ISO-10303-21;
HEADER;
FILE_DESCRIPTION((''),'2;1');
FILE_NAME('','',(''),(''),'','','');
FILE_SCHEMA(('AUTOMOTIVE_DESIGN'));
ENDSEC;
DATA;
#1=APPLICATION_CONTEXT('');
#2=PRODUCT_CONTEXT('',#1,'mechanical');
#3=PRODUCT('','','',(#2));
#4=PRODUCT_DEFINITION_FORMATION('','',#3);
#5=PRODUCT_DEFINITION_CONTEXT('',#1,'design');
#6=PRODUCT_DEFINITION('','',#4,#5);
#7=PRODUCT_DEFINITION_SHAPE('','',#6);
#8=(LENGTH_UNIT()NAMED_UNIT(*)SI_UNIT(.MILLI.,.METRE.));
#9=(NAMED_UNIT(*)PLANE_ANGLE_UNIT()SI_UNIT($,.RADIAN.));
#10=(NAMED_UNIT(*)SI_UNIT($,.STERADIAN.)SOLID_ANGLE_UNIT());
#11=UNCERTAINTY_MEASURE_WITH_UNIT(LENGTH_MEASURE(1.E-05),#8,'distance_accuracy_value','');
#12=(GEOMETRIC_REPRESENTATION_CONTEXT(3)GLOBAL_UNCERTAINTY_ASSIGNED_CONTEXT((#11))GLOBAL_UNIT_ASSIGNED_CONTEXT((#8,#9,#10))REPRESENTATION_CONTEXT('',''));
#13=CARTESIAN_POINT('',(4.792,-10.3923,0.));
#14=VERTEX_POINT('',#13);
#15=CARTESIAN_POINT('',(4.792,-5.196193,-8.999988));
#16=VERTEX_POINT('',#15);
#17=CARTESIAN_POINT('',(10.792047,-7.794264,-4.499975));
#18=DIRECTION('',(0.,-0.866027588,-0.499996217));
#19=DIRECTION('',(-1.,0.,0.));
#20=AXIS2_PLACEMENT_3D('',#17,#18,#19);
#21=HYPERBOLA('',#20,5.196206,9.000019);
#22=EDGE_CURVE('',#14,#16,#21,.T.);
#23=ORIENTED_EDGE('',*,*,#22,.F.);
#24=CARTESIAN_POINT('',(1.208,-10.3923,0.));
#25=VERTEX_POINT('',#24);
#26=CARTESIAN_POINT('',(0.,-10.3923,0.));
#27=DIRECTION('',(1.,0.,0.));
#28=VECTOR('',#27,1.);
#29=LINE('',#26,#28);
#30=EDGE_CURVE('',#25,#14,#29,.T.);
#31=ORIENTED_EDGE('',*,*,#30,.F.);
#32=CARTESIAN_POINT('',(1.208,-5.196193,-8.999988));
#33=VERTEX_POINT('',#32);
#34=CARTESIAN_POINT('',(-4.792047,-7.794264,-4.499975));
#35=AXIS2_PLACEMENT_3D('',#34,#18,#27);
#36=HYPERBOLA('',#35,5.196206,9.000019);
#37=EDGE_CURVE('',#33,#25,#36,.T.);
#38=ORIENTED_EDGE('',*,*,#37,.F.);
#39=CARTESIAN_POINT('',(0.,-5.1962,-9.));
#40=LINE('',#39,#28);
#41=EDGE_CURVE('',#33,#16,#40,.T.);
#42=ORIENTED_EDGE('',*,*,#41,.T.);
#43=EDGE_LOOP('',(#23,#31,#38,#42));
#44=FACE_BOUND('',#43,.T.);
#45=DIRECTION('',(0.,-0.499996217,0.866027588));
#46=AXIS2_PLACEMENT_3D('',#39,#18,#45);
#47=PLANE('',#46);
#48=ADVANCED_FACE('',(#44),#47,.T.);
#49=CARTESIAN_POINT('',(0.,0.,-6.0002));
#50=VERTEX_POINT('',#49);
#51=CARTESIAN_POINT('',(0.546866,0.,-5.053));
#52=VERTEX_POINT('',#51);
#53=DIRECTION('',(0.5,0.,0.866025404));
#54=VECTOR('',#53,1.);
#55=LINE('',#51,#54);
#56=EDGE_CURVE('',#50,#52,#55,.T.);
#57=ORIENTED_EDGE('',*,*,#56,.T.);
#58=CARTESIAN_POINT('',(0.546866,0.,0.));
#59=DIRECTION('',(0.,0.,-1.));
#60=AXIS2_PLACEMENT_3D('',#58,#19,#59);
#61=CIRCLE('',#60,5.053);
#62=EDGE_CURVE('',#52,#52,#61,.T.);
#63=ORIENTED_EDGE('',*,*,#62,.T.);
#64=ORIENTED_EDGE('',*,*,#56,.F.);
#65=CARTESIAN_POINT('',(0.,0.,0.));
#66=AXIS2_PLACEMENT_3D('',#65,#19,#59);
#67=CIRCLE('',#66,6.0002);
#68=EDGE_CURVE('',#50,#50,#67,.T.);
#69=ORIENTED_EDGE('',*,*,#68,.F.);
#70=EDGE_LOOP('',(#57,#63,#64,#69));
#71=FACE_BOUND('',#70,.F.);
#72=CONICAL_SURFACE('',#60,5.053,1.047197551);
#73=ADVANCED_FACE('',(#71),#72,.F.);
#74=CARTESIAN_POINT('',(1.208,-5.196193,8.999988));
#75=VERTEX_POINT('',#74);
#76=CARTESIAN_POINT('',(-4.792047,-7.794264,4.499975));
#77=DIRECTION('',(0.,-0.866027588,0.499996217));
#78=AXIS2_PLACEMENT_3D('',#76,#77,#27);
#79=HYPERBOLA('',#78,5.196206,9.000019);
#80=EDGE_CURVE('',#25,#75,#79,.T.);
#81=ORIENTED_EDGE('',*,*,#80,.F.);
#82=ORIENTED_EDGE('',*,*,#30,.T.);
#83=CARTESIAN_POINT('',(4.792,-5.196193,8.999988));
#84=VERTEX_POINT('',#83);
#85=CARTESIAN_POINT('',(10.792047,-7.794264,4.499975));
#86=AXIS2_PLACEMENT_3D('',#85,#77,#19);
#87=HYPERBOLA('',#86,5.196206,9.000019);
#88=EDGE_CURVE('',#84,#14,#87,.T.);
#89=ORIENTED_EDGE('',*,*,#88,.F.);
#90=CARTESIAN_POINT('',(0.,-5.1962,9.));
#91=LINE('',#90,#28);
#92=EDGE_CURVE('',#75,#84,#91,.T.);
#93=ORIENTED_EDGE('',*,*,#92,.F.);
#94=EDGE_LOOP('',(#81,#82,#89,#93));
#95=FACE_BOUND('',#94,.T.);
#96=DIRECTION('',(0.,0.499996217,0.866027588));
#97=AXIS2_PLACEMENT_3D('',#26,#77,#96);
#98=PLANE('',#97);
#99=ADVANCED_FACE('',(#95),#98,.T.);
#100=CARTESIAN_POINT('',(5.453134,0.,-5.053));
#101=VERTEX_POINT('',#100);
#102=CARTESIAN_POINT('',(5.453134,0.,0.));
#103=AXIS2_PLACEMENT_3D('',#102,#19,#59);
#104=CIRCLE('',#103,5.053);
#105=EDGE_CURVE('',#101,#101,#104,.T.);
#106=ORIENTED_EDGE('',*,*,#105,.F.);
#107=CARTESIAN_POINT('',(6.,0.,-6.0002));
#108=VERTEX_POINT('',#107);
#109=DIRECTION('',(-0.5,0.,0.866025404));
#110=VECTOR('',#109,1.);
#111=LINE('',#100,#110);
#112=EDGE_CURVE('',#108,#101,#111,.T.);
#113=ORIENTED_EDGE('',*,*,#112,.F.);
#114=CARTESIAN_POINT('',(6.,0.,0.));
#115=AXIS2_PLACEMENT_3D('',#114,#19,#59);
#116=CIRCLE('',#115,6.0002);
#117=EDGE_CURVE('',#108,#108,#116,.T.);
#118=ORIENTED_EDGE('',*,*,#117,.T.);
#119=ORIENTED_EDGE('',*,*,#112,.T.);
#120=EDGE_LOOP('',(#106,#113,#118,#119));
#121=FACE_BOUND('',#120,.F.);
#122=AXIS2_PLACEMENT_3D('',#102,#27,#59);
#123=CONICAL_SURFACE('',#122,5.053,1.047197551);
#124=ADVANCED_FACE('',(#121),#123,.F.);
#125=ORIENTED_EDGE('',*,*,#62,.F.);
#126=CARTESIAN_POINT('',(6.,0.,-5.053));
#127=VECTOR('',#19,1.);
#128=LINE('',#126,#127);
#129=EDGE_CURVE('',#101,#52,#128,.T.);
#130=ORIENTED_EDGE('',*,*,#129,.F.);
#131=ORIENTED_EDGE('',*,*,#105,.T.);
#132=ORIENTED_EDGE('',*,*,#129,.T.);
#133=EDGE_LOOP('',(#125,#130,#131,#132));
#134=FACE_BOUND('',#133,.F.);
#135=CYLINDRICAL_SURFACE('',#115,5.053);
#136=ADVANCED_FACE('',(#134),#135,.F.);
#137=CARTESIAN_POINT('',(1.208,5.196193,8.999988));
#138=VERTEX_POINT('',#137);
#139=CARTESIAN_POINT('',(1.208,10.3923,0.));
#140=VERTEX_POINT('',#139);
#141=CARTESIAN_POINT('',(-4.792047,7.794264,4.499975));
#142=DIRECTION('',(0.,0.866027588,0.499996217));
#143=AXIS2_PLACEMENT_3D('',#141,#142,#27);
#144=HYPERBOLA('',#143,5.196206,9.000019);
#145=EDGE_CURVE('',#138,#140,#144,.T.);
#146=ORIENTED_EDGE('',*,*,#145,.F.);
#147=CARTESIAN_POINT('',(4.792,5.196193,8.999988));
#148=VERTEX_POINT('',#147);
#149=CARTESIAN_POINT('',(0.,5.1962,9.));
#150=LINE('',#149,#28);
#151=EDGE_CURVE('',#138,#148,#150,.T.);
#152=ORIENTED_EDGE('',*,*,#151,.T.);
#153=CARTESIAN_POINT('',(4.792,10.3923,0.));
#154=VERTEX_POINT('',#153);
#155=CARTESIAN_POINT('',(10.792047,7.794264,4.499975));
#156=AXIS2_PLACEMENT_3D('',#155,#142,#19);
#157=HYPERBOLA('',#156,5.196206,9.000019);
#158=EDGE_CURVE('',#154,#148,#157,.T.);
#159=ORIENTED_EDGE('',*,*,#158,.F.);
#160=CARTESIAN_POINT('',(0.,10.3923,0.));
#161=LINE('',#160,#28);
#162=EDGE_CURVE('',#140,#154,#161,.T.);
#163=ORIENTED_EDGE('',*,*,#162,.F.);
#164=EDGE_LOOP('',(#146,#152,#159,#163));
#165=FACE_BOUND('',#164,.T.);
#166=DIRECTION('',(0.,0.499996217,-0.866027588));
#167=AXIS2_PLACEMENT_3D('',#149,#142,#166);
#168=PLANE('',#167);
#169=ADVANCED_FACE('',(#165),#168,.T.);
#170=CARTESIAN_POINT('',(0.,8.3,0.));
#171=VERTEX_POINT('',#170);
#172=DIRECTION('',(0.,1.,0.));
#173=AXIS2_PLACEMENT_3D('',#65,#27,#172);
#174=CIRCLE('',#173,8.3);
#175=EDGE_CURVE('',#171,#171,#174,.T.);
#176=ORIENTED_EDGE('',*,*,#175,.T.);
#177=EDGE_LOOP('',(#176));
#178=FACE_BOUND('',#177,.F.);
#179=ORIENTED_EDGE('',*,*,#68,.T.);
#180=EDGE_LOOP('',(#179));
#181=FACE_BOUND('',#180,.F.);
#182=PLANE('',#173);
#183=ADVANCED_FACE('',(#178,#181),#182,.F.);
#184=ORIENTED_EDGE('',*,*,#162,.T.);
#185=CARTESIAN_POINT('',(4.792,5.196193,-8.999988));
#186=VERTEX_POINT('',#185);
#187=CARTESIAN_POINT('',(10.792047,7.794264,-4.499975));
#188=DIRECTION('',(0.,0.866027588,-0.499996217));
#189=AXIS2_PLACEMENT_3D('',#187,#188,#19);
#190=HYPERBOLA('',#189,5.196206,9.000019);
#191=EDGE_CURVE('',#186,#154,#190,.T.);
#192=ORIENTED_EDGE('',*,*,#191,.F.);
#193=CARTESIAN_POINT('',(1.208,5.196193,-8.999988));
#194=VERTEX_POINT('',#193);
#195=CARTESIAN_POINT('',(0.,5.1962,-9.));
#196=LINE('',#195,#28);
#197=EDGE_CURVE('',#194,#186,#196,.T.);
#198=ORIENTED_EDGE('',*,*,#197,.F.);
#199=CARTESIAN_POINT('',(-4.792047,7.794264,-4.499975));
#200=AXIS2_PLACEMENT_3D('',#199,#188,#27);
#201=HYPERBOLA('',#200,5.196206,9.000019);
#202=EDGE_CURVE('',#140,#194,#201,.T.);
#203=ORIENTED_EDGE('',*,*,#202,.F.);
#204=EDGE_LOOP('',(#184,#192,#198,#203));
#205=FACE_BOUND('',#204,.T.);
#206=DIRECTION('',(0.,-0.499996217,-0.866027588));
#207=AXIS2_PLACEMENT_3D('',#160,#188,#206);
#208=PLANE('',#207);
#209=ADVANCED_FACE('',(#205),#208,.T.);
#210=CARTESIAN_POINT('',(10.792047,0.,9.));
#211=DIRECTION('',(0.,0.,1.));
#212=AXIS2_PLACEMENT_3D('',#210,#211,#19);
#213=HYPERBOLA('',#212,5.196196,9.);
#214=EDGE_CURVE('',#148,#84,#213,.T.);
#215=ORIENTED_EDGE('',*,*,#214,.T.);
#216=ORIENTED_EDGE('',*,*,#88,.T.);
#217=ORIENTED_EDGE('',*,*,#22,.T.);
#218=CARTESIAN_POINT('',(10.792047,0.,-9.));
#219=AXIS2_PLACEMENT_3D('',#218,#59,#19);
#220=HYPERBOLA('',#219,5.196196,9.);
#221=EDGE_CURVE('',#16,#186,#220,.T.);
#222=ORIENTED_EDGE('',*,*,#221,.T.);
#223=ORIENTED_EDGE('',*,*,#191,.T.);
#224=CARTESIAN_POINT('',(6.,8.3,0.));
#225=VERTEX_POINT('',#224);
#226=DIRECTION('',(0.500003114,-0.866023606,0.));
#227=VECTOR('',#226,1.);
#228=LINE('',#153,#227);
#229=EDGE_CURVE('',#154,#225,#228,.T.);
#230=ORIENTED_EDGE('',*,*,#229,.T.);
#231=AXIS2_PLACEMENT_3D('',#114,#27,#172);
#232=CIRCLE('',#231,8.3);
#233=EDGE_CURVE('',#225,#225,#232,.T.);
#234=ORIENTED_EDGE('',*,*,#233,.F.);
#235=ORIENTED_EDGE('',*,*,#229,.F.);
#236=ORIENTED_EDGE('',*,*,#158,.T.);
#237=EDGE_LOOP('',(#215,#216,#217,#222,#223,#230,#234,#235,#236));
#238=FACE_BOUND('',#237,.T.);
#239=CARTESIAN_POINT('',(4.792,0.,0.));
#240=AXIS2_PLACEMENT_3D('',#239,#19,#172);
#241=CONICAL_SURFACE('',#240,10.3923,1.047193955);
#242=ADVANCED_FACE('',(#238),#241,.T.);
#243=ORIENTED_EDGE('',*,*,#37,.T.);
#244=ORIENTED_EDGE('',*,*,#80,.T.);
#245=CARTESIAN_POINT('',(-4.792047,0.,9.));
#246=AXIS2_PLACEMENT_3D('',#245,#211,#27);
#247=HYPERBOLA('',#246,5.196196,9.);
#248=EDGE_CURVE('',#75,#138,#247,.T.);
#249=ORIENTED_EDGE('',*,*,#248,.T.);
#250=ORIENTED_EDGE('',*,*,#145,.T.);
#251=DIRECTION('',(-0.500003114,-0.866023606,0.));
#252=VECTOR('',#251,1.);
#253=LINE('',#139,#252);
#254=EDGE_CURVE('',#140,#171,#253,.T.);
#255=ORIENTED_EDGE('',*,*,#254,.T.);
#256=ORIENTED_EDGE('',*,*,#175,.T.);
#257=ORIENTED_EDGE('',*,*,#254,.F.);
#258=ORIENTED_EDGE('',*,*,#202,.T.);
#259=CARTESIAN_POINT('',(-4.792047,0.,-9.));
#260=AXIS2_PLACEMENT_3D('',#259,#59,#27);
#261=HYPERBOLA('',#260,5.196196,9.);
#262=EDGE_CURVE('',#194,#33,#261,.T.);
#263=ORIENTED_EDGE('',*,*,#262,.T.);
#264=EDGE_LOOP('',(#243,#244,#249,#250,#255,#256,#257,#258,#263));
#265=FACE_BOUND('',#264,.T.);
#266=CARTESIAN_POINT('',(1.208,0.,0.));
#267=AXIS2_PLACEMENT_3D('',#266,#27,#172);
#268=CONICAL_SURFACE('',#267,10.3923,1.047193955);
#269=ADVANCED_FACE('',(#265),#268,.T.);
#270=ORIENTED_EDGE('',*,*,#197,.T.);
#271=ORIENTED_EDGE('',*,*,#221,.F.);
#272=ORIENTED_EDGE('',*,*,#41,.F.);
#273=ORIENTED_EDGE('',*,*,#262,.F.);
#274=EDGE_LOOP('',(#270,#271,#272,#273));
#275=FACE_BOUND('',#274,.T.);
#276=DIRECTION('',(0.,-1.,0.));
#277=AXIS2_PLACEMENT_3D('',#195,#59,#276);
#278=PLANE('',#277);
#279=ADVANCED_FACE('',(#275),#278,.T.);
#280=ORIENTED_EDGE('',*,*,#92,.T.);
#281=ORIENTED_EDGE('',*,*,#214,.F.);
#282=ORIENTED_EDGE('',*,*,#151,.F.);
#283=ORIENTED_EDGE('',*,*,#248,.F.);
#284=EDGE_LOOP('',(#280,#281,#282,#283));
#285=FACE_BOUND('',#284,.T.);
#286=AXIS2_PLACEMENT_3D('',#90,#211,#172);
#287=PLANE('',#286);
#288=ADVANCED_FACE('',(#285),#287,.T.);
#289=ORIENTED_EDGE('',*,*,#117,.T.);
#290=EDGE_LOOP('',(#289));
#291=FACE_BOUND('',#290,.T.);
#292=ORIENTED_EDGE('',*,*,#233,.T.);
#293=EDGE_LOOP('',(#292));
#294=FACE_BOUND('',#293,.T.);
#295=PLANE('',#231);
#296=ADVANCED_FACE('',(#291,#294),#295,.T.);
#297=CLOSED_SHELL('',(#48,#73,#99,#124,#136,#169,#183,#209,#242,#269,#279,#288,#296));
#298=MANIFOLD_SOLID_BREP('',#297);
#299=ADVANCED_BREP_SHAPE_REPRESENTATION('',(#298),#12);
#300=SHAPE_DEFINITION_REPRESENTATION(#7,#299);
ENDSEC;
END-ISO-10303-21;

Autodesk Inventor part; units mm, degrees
ref_plane "YZ Plane" through (0, 0, 0) normal (1, 0, 0) x (0, 1, 0)
ref_plane "XZ Plane" through (0, 0, 0) normal (0, 1, 0) x (-1, 0, 0)
sketch "Sketch1" plane through (0, 0, 0) normal (1, 0, 0) x (0, 1, 0)
  line L0 (-10.3923, 0) -> (-5.1962, 9)
  line L1 (-5.1962, 9) -> (5.1962, 9)
  line L2 (5.1962, 9) -> (10.3923, 0)
  line L3 (10.3923, 0) -> (5.1962, -9)
  line L4 (5.1962, -9) -> (-5.1962, -9)
  line L5 (-5.1962, -9) -> (-10.3923, 0)
  point P0 (0, 0)
  point P1 (0, 0)
  dimension "d0" = 20.7846
extrude "Body" add sketch "Sketch1" along normal blind 6
sketch "Sketch2" plane through (0, 0, 0) normal (0, 0, 1) x (1, 0, 0)
  line L0 (0, 5.1962) -> (0, 10.3923) projected
  line L1 (0, 10.3923) -> (6, 10.3923) projected
  line L2 (6, 5.1962) -> (6, 10.3923) projected
  line L3 (-1.2, 0) -> (7.2, 0) projected
  line L4 (1.208, 10.3923) -> (0, 8.3)
  line L5 (4.792, 10.3923) -> (6, 8.3)
  dimension "d3" = 30
  dimension "d4" = 30
  dimension "d5" = 16.6
  dimension "d6" = 16.6
revolve "Chamfer1" cut sketch "Sketch2" angle 360 about axis through (-10, 0, 0) along (1, 0, 0)
sketch "Sketch3" plane through (6, 0, 0) normal (1, 0, 0) x (0, 0, -1)
  arc A0 (-0.625, -1.0825) -> (0.625, -1.0825) centre (0, 0) ccw projected
hole "Thread" at (6, 0, 0) direction (-1, 0, 0) diameter 10.106 end through all thread size "M12x1.75" class "6H" standard "ISO Metric profile"
chamfer "Chamfer2" distance 0.9472 angle 30 1 edges at (6, 0, 5.053) measured on face at (6, 7.125, -0.8651)
chamfer "Chamfer3" distance 0.9472 angle 30 1 edges at (0, 0, 5.053) measured on face at (0, 7.125, -0.8651)
ref_plane "Work Plane1" through (-22.2728, 0, 0) normal (0, -0.8660254, -0.5) x (1, 0, 0)
equation "\"d0\" = 1.1547 * SW"
equation "\"d1\" = KOH"
equation "\"d3\" = ANG1"
equation "\"d4\" = ANG2"
equation "\"d5\" = SW0"
equation "\"d6\" = SW01"
equation "\"d8\" = -0.5 * GD1 + 0.5 * NND"
equation "\"d40\" = -0.5 * GD1 + 0.5 * NND"
equation "\"d10\" = -0.5 * GD1 + 0.5 * NND"
equation "\"d41\" = -0.5 * GD1 + 0.5 * NND"
equation "\"ANG1\" = 30deg"
equation "\"ANG2\" = 30deg"
equation "\"NND\" = 12"
equation "\"KOH\" = 6"
equation "\"SW\" = 18"
equation "\"SW0\" = 16.6"
equation "\"SW01\" = SW0"
equation "\"GUL\" = 0.541266 * PTC"
equation "\"THREADDIA\" = 12"
equation "\"TOA\" = 30deg"
equation "\"PTC\" = 1.75"
equation "\"E0\" = 1.155 * SW"
equation "\"GAL\" = 0.541266 * PTC"
equation "\"GD1\" = 10.105569"
properties part number "ISO 4035 - M12" material "Stainless Steel, 440C"
